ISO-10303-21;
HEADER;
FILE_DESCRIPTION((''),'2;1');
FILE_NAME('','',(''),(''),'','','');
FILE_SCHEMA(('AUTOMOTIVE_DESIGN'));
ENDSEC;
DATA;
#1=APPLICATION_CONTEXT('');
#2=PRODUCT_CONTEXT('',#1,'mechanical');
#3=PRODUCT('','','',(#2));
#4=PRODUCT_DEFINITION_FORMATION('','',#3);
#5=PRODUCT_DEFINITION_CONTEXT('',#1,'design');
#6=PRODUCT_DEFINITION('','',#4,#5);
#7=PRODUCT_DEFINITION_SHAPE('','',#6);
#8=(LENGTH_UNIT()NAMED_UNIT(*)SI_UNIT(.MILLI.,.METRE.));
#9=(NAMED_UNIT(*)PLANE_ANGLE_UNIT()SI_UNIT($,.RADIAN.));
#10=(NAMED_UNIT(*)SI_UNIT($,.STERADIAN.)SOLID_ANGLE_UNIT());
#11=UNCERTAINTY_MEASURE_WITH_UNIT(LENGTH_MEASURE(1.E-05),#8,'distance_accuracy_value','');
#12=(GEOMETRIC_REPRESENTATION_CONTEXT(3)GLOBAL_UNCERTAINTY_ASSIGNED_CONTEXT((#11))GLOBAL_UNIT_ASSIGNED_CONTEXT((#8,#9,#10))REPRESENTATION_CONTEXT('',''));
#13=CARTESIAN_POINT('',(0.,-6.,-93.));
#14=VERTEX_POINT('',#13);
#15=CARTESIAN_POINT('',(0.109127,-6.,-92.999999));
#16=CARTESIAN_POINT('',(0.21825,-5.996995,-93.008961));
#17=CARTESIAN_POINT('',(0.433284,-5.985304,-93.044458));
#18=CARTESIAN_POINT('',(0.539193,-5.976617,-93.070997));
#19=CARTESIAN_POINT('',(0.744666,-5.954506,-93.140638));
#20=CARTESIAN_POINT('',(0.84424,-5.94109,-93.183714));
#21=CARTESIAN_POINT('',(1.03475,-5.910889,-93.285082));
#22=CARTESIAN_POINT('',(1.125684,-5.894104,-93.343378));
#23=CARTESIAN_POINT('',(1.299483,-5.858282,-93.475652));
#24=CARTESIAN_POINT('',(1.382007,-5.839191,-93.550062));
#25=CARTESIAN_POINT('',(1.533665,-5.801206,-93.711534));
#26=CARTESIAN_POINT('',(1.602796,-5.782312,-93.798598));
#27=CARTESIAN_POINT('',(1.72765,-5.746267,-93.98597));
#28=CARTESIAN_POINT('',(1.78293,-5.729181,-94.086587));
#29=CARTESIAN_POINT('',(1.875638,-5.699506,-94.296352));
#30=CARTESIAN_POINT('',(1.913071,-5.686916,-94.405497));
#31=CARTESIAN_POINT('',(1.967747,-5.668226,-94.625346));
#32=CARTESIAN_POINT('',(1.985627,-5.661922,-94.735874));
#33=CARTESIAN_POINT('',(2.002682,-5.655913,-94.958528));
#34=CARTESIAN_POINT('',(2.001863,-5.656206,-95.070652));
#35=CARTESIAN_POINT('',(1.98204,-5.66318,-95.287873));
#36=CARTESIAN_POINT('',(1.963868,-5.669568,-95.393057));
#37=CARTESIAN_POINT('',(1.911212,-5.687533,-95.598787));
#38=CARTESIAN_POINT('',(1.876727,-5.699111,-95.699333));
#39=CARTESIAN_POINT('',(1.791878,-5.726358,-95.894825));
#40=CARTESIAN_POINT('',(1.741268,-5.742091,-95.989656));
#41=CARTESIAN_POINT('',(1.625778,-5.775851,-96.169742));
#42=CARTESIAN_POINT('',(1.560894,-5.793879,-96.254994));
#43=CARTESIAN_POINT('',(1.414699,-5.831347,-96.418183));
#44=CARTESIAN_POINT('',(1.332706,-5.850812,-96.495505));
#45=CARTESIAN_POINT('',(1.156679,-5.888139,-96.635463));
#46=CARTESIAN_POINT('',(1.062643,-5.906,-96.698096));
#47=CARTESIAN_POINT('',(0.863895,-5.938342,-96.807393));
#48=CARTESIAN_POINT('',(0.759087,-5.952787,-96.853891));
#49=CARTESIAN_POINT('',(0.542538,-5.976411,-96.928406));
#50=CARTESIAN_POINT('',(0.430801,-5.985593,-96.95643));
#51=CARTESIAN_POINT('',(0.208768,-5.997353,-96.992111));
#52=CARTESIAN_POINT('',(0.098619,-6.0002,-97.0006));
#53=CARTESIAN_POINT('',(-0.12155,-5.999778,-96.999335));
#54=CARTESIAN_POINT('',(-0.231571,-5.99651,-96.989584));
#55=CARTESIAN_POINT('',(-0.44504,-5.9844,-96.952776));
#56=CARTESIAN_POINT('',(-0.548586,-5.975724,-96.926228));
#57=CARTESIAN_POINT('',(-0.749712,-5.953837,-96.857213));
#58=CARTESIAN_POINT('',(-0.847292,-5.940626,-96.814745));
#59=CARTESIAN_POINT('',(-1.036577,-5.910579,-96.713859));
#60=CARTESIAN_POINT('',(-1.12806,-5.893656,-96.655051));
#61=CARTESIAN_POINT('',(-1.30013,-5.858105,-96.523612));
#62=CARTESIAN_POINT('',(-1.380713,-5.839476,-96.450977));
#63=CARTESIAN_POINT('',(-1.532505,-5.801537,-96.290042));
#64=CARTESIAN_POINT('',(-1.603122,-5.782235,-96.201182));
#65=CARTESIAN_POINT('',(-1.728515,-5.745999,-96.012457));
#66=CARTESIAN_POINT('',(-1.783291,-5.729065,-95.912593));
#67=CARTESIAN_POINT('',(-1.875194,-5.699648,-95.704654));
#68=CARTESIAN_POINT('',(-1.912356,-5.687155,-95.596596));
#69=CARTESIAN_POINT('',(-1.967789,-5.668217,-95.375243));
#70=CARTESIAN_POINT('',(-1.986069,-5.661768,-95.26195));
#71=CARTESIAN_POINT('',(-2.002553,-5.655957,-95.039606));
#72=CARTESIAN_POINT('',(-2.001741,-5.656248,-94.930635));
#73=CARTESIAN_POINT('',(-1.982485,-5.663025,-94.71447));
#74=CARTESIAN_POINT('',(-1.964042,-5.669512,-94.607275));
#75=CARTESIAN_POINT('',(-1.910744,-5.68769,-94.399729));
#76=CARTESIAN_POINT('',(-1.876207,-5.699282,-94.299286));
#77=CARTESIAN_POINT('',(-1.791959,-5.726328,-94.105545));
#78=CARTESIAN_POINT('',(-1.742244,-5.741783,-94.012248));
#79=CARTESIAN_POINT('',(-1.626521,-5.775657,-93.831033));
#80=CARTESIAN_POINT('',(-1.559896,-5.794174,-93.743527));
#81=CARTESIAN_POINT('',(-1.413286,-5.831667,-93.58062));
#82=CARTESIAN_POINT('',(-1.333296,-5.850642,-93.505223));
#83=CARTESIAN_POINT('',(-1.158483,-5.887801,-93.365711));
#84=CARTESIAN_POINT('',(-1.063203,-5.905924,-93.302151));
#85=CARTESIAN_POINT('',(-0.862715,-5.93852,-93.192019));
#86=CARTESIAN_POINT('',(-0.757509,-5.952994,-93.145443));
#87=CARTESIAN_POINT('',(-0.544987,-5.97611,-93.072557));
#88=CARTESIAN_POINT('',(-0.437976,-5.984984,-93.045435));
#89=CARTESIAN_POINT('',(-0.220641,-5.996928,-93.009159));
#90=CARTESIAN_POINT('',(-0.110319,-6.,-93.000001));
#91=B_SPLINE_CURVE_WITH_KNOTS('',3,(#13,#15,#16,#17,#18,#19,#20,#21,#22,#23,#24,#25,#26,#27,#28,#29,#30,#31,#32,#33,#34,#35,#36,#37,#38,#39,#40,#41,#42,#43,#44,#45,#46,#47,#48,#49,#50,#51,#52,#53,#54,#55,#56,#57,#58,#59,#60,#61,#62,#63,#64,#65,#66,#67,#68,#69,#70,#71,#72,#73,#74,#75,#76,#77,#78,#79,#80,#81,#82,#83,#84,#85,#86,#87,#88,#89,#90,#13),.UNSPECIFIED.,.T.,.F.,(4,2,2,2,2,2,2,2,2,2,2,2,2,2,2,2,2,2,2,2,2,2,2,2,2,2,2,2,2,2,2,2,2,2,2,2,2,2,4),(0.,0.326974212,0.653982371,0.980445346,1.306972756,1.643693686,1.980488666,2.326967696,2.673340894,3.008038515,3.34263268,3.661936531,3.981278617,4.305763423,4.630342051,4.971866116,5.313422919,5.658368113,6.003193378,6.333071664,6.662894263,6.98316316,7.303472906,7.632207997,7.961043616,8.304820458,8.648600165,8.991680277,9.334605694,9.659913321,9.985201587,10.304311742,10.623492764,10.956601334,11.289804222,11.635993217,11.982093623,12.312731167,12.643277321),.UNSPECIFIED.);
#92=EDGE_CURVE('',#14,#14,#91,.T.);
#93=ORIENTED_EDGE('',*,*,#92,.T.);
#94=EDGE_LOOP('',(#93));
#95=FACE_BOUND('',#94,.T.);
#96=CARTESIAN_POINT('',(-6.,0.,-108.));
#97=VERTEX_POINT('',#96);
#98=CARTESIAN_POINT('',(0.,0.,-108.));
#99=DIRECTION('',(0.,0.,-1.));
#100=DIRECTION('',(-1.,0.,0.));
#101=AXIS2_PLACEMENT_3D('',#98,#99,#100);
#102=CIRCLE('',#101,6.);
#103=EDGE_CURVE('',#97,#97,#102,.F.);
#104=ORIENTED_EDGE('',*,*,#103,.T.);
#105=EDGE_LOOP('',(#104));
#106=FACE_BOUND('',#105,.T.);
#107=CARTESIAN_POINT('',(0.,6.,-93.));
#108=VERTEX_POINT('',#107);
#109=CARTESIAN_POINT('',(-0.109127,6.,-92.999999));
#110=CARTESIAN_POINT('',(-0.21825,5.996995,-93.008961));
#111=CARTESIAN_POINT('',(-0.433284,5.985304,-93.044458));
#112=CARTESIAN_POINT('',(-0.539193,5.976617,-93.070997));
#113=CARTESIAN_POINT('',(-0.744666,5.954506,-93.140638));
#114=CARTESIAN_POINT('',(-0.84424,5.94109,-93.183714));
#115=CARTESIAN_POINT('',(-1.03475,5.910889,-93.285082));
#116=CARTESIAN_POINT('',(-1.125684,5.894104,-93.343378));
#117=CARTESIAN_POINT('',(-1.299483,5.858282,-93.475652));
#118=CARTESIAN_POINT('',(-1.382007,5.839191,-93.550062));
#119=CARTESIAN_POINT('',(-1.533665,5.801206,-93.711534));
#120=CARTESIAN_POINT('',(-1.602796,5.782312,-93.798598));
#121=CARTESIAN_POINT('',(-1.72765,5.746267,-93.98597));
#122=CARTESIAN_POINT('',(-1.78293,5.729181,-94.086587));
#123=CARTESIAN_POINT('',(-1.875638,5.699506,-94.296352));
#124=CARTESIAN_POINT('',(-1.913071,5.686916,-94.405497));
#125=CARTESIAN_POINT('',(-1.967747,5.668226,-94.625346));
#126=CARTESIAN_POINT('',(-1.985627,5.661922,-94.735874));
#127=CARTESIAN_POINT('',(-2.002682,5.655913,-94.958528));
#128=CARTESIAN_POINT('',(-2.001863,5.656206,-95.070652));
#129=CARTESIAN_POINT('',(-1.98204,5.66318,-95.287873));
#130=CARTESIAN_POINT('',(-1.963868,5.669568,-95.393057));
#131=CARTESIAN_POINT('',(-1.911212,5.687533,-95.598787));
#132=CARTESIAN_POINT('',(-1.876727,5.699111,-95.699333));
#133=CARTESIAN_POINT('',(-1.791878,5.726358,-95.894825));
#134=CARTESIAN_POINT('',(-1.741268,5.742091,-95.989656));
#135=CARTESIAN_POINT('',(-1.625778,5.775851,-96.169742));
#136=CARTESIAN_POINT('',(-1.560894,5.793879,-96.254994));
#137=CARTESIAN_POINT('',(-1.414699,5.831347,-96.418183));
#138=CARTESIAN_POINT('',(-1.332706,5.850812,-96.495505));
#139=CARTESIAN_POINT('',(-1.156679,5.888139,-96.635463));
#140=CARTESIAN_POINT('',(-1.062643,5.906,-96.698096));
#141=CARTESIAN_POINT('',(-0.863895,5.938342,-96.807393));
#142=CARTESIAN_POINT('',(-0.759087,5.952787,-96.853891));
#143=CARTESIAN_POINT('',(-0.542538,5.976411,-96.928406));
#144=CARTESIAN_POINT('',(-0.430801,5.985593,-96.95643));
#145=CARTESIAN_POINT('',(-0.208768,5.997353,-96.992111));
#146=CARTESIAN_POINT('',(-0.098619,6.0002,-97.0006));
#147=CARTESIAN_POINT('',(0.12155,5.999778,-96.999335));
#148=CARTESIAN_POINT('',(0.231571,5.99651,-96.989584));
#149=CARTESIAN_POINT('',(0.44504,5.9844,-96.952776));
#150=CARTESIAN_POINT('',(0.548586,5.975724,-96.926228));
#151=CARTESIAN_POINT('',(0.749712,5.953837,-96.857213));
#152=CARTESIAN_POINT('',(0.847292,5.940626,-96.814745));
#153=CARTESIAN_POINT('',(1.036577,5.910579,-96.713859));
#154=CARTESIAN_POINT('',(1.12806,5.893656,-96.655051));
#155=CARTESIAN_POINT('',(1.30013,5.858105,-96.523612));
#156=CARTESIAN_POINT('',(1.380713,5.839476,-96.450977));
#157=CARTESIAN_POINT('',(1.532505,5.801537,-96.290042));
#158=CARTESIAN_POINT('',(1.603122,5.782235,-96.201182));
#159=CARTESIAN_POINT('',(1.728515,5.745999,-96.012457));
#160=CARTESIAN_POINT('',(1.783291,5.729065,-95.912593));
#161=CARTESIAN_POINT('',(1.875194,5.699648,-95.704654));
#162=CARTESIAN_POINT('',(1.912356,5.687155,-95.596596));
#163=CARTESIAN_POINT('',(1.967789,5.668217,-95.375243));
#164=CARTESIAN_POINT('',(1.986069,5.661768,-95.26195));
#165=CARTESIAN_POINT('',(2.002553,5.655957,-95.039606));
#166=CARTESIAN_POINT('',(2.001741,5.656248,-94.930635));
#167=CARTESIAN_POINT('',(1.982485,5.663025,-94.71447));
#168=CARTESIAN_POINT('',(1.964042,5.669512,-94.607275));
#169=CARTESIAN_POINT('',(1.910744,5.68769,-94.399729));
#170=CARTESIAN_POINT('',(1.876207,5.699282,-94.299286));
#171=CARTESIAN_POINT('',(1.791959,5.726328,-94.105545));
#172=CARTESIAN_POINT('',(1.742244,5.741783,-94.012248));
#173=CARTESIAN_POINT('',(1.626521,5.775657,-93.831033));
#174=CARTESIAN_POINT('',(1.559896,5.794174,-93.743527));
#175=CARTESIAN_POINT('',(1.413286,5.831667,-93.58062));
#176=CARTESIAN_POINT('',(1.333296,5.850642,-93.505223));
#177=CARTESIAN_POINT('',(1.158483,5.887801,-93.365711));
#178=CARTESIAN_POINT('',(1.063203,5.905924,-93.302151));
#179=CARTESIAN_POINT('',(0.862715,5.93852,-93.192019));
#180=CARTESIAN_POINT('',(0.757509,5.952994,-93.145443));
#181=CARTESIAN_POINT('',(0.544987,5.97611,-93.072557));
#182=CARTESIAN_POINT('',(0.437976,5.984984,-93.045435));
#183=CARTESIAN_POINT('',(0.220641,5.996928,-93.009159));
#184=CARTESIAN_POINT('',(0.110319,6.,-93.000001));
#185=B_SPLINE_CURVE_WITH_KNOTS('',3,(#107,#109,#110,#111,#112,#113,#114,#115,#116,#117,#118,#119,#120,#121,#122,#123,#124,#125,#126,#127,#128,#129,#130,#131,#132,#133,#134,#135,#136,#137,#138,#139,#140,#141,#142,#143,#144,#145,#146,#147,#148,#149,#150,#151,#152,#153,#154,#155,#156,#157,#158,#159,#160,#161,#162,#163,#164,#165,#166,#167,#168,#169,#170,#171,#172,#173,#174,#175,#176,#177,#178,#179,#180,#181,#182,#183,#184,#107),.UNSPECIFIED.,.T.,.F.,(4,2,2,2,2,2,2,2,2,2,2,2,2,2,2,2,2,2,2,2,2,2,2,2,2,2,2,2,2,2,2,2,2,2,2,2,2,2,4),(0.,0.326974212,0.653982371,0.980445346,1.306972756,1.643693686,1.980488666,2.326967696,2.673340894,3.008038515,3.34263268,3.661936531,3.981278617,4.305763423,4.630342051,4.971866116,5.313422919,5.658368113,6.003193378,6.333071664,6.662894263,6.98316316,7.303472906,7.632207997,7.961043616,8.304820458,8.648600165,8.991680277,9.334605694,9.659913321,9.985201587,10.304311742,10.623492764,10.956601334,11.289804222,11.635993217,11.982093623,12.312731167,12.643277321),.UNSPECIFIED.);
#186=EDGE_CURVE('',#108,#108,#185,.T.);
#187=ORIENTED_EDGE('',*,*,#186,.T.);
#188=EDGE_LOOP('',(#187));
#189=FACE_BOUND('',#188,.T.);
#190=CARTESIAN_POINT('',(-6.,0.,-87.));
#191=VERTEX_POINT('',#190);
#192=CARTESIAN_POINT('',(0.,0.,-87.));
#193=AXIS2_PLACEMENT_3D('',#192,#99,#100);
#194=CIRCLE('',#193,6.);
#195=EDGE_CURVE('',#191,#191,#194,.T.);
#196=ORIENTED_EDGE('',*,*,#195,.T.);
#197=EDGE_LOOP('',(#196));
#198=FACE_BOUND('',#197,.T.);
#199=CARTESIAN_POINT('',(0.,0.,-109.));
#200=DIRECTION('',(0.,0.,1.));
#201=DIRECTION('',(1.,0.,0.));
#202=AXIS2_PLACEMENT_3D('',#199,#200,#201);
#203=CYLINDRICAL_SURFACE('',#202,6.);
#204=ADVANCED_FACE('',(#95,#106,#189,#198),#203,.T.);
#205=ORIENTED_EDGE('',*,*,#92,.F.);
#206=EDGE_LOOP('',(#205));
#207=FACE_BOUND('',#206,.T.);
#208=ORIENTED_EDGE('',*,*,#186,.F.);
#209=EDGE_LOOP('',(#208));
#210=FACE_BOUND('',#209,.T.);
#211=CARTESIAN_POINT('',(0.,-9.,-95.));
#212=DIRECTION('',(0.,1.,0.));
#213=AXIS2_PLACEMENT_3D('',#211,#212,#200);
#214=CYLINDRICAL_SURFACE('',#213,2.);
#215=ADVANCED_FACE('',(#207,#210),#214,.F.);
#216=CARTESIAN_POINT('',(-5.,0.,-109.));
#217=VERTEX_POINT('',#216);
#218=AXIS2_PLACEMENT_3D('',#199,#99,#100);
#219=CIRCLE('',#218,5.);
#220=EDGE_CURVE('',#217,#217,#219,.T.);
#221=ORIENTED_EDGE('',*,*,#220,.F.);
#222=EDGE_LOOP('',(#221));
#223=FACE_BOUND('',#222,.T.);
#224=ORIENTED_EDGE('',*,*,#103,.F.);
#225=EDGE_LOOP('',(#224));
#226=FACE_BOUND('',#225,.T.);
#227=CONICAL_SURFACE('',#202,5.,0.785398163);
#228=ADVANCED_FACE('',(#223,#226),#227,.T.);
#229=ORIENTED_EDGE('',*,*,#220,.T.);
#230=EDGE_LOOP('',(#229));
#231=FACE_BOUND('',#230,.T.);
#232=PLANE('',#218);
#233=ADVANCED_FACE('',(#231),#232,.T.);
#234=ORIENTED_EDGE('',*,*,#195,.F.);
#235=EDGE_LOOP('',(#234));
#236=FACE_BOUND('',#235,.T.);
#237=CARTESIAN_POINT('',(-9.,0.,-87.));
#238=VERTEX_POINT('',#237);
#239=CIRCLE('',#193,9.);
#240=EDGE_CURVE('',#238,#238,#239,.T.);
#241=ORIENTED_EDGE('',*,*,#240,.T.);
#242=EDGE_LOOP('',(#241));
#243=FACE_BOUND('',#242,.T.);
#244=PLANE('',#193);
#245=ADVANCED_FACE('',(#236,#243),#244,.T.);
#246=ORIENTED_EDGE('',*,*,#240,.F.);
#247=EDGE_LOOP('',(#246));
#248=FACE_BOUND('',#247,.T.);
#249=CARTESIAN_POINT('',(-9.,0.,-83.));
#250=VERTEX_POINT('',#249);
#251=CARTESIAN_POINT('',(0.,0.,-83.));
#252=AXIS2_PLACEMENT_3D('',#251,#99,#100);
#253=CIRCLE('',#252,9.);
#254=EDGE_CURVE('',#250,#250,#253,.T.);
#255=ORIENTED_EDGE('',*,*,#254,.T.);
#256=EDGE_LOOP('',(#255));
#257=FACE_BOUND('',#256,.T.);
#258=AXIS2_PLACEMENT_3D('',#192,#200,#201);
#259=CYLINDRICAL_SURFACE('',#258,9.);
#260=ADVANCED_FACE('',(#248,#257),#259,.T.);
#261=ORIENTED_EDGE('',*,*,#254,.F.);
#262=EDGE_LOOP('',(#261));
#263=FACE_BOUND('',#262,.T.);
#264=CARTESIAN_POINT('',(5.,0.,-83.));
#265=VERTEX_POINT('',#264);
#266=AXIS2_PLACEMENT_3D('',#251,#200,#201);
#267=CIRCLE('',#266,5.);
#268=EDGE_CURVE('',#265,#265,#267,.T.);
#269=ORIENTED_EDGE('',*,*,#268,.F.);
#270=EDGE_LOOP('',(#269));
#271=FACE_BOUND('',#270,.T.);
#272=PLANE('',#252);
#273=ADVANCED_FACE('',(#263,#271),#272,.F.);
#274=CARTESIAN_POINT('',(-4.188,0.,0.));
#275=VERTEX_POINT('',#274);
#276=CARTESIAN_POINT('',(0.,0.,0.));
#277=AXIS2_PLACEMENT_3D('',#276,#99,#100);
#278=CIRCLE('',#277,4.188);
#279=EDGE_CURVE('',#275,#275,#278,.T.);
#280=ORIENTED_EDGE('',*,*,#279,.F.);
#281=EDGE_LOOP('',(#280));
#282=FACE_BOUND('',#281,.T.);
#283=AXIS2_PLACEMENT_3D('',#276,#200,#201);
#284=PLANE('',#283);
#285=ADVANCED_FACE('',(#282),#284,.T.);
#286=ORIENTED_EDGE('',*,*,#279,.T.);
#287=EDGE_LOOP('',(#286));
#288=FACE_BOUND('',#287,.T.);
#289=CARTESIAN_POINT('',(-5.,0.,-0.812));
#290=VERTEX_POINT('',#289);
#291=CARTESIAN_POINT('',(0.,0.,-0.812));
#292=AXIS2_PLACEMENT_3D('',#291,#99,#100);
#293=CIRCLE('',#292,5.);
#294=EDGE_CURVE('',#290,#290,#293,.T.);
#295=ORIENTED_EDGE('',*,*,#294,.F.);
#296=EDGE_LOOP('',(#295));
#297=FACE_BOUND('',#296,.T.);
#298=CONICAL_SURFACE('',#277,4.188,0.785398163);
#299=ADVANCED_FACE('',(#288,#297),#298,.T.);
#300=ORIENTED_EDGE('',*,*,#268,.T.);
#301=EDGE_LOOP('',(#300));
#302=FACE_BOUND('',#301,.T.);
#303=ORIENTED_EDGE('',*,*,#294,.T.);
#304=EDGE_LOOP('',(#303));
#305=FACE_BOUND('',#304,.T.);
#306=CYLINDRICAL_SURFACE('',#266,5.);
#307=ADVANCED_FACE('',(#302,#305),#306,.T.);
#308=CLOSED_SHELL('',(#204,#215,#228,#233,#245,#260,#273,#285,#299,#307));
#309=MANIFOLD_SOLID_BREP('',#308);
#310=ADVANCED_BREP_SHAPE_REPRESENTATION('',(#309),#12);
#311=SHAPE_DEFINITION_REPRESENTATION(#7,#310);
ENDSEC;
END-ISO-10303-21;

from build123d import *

# Parameters (mm, degrees)
SKETCH_1_R               = 5
EXTRUDE_1_DEPTH          = 83
SKETCH_3_R               = 9
EXTRUDE_2_DEPTH          = 4
SKETCH_4_R               = 6
EXTRUDE_3_DEPTH          = 22
CUT_EXTRUDE_1_DEPTH      = 110.740603242
CUT_EXTRUDE_1_DEPTH_BACK = 110.740603242
SKETCH_5_R               = 2
CHAMFER_1_SIZE           = 1


# Read off the part's stored shape, not the designer's step: M10 机械螺纹 螺柱1
with BuildPart() as part:
    # 草图1 → 凸台-拉伸1 (new body)
    with BuildSketch(Plane.XY):
        Circle(SKETCH_1_R)
    extrude(amount=-EXTRUDE_1_DEPTH)

    # M10 机械螺纹 螺柱1 outline → M10 机械螺纹 螺柱1 (revolve, cut)
    with BuildSketch(Plane.XZ):
        Polygon((5, 0), (4.188, 0), (5, -0.812), align=None)
    revolve(axis=Axis((0, 0, 0), (0, 0, 1)), mode=Mode.SUBTRACT)

    # 草图3 → 凸台-拉伸2 (add)
    with BuildSketch(Plane(origin=(0, 0, -83), x_dir=(-1, 0, 0), z_dir=(0, 0, -1))):
        Circle(SKETCH_3_R)
    extrude(amount=EXTRUDE_2_DEPTH)

    # 草图4 → 凸台-拉伸3 (add)
    with BuildSketch(Plane(origin=(0, 0, -87), x_dir=(-1, 0, 0), z_dir=(0, 0, -1))):
        Circle(SKETCH_4_R)
    extrude(amount=EXTRUDE_3_DEPTH)

    # 草图5 → 切除-拉伸1 (cut, two sides: drawn at the far end of the back side and taken through both)
    with BuildSketch(Plane(origin=(0, 0, 0), x_dir=(1, 0, 0), z_dir=(0, 1, 0)).offset(-CUT_EXTRUDE_1_DEPTH_BACK)):
        with Locations(Location((0, 95, 0), (0, 0, 270))):
            Circle(SKETCH_5_R)
    extrude(amount=CUT_EXTRUDE_1_DEPTH + CUT_EXTRUDE_1_DEPTH_BACK, mode=Mode.SUBTRACT)

    # 倒角1
    chamfer_1_edges = [part.edges().sort_by_distance(p)[0] for p in [
        (6, 0, -109),
    ]]
    chamfer(chamfer_1_edges, length=CHAMFER_1_SIZE)


solid = part.part
